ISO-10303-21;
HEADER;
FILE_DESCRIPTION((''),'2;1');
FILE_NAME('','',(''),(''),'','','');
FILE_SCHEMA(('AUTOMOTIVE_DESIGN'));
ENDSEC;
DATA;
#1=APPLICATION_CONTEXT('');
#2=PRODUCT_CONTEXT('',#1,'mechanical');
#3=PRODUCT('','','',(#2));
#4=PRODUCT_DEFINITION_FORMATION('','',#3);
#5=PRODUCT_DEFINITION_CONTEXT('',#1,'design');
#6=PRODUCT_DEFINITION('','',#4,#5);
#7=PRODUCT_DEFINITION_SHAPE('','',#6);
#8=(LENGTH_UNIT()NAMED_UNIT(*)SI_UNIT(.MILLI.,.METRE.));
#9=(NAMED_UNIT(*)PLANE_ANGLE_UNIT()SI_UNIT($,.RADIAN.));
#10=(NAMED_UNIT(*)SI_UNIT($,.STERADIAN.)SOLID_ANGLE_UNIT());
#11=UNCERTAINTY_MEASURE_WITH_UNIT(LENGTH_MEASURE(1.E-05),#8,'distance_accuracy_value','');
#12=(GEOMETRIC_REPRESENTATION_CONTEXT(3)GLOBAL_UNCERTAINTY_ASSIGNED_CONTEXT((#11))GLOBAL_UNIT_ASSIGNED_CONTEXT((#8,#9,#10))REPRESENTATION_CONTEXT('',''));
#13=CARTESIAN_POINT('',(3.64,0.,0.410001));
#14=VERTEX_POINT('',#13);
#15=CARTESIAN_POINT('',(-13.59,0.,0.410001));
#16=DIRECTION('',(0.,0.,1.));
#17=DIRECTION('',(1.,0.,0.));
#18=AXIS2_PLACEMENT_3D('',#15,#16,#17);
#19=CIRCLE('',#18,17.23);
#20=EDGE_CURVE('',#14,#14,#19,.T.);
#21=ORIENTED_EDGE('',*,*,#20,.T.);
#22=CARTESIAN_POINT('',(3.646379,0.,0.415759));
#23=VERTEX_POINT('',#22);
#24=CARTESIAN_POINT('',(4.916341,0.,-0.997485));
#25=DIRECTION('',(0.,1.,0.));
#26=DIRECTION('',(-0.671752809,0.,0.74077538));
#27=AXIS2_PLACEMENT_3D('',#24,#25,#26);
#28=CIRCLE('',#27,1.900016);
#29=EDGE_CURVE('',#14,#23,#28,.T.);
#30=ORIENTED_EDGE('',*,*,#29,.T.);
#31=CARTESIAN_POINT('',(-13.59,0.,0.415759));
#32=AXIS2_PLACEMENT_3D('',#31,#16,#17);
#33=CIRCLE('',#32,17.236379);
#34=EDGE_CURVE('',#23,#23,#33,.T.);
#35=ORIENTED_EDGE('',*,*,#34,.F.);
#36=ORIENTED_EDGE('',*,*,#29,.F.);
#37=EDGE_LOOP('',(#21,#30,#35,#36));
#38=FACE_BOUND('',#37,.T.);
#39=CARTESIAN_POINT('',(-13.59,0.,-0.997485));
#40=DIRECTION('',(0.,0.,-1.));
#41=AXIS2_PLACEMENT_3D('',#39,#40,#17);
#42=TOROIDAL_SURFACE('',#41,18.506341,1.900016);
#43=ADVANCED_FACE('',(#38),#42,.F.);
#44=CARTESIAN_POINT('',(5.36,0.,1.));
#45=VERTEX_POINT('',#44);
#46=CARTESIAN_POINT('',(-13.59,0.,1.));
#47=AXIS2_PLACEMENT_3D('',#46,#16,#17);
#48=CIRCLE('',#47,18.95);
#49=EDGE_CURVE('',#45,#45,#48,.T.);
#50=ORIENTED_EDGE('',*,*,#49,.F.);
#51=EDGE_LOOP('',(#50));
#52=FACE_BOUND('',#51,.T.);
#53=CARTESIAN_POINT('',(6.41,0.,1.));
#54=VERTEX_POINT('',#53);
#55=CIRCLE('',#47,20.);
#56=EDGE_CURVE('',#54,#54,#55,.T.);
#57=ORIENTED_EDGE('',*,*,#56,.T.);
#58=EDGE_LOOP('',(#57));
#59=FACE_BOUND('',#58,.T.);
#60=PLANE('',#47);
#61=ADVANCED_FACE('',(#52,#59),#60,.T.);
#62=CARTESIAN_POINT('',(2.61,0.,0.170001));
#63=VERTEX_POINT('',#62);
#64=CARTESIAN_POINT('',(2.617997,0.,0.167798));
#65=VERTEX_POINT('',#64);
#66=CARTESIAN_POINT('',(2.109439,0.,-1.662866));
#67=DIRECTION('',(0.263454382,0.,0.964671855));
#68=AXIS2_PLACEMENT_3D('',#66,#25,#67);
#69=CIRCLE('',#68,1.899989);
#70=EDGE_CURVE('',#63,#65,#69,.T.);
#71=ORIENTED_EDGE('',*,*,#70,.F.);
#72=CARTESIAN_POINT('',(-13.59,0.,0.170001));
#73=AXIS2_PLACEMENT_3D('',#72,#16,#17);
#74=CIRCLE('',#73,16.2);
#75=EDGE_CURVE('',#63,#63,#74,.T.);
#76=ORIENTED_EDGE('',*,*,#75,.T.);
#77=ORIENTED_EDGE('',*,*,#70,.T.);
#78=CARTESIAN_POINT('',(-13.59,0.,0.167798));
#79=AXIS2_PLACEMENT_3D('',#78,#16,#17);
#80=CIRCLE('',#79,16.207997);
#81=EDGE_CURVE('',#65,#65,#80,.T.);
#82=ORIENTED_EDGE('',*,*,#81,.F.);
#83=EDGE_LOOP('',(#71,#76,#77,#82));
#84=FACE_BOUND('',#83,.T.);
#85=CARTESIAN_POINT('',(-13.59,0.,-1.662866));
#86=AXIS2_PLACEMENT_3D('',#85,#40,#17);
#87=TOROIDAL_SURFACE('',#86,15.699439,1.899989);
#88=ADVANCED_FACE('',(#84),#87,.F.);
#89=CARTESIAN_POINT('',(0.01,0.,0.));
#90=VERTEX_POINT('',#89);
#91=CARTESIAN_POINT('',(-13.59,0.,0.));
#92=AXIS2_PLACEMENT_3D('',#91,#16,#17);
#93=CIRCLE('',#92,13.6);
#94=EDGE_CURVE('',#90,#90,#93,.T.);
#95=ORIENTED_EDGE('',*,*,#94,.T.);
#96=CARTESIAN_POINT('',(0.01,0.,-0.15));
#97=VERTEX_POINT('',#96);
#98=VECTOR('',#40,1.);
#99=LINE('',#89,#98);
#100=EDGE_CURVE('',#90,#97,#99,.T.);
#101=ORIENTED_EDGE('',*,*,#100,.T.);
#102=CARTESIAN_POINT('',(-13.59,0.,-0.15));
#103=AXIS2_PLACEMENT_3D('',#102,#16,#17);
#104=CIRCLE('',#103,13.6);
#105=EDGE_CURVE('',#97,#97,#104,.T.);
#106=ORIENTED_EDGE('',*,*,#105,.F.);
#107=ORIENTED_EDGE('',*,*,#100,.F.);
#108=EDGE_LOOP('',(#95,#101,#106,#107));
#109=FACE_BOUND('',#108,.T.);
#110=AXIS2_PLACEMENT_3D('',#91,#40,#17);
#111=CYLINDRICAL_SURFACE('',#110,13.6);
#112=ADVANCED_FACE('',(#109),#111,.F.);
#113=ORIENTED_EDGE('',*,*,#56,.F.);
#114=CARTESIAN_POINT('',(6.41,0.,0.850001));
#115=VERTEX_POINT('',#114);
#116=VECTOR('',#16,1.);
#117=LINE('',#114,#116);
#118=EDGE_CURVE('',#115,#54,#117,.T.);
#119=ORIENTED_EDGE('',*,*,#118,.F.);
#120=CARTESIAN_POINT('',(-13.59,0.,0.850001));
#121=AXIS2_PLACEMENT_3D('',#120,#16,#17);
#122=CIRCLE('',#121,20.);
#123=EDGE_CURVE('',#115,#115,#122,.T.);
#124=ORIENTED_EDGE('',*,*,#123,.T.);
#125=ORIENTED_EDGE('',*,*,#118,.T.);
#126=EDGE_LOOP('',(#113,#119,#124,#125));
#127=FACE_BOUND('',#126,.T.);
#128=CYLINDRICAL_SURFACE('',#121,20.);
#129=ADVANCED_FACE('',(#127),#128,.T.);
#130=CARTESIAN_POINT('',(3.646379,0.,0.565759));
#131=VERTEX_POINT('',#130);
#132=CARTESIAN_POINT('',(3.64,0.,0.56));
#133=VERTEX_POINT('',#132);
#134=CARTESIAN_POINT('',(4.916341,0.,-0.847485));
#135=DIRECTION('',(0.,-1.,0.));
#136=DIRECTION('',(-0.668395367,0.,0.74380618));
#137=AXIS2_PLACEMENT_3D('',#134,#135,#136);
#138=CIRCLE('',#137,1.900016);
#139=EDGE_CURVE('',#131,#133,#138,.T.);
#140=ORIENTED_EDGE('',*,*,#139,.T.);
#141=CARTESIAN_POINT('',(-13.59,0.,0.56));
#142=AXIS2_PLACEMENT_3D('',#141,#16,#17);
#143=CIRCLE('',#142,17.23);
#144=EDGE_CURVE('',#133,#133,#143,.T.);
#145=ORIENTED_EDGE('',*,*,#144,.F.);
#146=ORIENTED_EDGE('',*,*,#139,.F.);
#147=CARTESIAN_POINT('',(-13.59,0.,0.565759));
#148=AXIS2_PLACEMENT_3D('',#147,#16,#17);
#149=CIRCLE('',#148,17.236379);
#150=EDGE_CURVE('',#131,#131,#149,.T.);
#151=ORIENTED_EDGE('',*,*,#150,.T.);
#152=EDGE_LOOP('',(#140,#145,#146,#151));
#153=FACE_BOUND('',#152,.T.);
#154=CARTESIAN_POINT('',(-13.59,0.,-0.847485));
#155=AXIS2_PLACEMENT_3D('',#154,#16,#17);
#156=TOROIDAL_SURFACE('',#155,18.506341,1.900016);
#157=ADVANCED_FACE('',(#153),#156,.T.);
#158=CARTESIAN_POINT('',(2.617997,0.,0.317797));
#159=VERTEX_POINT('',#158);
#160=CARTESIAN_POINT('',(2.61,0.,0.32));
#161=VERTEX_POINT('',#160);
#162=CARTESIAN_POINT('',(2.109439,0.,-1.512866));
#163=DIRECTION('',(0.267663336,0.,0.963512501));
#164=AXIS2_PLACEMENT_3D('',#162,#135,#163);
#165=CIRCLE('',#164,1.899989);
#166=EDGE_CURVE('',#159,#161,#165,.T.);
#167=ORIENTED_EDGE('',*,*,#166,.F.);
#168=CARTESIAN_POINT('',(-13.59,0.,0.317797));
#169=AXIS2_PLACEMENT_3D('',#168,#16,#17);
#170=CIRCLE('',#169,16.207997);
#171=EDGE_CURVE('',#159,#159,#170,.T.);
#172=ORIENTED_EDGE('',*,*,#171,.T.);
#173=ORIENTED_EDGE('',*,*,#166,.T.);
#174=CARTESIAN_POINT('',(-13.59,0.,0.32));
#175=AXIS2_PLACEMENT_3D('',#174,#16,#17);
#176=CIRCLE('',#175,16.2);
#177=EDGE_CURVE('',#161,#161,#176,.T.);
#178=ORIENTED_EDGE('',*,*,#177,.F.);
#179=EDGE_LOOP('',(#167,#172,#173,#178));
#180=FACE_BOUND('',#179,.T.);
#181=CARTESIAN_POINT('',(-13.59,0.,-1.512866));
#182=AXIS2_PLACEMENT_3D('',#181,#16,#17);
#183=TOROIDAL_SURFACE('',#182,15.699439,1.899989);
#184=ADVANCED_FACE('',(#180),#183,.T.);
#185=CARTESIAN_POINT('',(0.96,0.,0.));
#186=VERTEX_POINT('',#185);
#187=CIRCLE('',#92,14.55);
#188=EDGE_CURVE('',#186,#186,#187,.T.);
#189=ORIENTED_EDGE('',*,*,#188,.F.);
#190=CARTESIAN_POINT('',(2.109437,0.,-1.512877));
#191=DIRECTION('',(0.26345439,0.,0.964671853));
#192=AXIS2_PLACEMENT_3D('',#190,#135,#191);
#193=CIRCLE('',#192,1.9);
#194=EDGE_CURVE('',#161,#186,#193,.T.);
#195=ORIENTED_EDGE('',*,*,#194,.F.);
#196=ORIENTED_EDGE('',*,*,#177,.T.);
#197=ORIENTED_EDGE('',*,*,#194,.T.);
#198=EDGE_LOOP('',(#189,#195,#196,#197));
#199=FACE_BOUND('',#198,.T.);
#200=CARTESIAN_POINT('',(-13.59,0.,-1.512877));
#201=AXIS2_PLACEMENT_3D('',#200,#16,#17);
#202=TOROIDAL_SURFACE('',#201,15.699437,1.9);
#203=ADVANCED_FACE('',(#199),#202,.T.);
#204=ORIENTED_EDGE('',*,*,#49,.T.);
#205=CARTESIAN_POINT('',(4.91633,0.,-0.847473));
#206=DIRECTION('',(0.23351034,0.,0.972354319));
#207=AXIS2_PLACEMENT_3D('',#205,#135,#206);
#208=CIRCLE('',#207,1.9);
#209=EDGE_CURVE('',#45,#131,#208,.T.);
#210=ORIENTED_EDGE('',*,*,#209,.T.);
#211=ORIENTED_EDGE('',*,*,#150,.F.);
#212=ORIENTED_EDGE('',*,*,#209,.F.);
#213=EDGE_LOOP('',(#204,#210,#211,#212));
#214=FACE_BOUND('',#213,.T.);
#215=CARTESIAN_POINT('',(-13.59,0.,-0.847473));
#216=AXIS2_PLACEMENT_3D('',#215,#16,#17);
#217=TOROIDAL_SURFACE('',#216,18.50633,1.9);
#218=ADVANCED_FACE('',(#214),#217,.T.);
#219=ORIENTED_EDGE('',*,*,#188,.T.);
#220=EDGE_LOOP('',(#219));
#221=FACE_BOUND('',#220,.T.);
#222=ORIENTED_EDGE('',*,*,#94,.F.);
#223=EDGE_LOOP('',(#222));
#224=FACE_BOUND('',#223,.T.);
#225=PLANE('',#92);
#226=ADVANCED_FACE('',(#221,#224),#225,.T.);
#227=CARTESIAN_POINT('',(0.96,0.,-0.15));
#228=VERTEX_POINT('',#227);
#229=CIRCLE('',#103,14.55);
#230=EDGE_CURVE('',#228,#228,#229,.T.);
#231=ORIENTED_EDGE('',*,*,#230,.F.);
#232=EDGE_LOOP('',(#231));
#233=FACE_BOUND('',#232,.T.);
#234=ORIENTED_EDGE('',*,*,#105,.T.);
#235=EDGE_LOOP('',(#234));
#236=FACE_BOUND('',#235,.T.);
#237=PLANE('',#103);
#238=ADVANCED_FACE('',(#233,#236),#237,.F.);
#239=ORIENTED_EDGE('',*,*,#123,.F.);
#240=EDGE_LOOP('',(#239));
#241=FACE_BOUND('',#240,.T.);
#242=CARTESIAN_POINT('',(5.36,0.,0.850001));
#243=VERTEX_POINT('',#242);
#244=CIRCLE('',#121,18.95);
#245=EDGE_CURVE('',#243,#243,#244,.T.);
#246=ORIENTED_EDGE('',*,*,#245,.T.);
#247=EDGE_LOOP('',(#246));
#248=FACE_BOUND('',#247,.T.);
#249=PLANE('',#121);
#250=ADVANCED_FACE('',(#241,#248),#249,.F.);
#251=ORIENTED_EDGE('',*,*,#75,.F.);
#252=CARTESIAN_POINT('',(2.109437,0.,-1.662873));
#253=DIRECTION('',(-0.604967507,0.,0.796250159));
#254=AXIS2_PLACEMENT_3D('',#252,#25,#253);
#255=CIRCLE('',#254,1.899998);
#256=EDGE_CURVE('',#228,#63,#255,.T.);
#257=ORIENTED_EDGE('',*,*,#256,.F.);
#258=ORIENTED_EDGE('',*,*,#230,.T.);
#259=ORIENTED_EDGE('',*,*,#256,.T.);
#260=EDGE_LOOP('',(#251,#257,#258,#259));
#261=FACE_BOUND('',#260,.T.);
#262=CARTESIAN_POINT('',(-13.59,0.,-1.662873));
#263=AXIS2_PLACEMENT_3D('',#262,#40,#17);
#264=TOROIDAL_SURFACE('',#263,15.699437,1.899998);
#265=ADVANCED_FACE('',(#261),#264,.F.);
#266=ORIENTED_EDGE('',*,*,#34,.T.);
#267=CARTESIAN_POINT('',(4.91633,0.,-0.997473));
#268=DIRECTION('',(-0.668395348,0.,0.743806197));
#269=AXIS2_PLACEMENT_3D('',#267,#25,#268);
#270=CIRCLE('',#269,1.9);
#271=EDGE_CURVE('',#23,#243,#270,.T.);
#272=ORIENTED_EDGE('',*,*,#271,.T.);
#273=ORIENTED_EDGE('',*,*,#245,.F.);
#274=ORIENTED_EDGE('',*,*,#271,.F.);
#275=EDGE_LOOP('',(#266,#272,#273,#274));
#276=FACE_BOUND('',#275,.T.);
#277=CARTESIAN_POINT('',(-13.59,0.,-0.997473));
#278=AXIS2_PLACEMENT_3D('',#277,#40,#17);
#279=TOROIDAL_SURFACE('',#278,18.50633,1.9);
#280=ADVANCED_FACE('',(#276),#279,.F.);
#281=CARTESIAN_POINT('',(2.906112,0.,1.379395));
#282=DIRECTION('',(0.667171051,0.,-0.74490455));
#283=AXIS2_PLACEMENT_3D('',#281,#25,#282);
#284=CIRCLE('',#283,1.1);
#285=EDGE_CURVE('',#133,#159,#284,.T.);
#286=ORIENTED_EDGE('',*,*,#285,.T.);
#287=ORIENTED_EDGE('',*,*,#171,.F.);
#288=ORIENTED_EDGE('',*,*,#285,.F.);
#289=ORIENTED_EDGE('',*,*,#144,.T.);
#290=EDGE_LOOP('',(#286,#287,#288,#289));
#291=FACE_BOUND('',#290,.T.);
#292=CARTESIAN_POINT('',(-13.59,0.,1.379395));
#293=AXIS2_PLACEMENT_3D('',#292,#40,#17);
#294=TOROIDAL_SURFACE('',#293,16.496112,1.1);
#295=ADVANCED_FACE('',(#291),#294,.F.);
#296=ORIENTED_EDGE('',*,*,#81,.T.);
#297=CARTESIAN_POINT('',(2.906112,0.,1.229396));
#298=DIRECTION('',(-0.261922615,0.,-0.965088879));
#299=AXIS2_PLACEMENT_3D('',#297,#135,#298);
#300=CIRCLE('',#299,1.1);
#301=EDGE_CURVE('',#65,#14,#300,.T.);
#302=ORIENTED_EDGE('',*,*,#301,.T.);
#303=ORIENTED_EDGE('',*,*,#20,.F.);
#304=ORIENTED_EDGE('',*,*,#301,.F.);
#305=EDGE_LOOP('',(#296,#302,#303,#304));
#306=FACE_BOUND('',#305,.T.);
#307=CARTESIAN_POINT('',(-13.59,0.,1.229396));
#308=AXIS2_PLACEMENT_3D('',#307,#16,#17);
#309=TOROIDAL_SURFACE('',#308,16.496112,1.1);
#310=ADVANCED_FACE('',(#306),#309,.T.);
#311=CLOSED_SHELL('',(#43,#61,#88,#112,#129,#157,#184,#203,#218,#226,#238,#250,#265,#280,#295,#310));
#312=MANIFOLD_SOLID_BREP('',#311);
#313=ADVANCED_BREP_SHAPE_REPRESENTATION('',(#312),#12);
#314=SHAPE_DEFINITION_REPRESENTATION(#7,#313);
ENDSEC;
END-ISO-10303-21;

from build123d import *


# Not quite as in the source:
# - ends of sketch curves that miss each other by under 0.0002 mm in the source are joined


with BuildPart() as f1:
    # F0 (on Front) → F1 (revolve)
    with BuildSketch(Plane.XZ):
        with BuildLine():
            Line((0.96, 0), (0.01, 0))
            Line((0.01, 0), (0.01, -0.15))
            Line((0.01, -0.15), (0.96, -0.15))
            ThreePointArc((0.96, -0.15), (1.7476920727, 0.2023696464), (2.61, 0.1700006461))
            ThreePointArc((2.61, 0.1700006461), (2.6139996854, 0.1689036293), (2.6179969666, 0.1677978844))
            ThreePointArc((2.6179969666, 0.1677978844), (3.1597730322, 0.1590424375), (3.64, 0.4100006461))
            ThreePointArc((3.64, 0.4100006461), (3.6431863407, 0.4128835368), (3.646379193, 0.4157592141))
            ThreePointArc((3.646379193, 0.4157592141), (4.4496112836, 0.8443127993), (5.36, 0.8500006461))
            Line((5.36, 0.8500006461), (6.41, 0.8500006461))
            Line((6.41, 0.8500006461), (6.41, 1))
            Line((6.41, 1), (5.36, 1))
            ThreePointArc((5.36, 1), (4.4496112836, 0.9943121532), (3.646379193, 0.565758568))
            ThreePointArc((3.646379193, 0.565758568), (3.6431863407, 0.5628828907), (3.64, 0.56))
            ThreePointArc((3.64, 0.56), (3.1597730322, 0.3090417914), (2.6179969666, 0.3177972383))
            ThreePointArc((2.6179969666, 0.3177972383), (2.6139996854, 0.3189029832), (2.61, 0.32))
            ThreePointArc((2.61, 0.32), (1.7476920727, 0.3523690002), (0.96, 0))
        make_face()
    revolve(axis=Axis((-13.59, 0, 6.1745331623), (0, 0, 1)))


solid = f1.part
